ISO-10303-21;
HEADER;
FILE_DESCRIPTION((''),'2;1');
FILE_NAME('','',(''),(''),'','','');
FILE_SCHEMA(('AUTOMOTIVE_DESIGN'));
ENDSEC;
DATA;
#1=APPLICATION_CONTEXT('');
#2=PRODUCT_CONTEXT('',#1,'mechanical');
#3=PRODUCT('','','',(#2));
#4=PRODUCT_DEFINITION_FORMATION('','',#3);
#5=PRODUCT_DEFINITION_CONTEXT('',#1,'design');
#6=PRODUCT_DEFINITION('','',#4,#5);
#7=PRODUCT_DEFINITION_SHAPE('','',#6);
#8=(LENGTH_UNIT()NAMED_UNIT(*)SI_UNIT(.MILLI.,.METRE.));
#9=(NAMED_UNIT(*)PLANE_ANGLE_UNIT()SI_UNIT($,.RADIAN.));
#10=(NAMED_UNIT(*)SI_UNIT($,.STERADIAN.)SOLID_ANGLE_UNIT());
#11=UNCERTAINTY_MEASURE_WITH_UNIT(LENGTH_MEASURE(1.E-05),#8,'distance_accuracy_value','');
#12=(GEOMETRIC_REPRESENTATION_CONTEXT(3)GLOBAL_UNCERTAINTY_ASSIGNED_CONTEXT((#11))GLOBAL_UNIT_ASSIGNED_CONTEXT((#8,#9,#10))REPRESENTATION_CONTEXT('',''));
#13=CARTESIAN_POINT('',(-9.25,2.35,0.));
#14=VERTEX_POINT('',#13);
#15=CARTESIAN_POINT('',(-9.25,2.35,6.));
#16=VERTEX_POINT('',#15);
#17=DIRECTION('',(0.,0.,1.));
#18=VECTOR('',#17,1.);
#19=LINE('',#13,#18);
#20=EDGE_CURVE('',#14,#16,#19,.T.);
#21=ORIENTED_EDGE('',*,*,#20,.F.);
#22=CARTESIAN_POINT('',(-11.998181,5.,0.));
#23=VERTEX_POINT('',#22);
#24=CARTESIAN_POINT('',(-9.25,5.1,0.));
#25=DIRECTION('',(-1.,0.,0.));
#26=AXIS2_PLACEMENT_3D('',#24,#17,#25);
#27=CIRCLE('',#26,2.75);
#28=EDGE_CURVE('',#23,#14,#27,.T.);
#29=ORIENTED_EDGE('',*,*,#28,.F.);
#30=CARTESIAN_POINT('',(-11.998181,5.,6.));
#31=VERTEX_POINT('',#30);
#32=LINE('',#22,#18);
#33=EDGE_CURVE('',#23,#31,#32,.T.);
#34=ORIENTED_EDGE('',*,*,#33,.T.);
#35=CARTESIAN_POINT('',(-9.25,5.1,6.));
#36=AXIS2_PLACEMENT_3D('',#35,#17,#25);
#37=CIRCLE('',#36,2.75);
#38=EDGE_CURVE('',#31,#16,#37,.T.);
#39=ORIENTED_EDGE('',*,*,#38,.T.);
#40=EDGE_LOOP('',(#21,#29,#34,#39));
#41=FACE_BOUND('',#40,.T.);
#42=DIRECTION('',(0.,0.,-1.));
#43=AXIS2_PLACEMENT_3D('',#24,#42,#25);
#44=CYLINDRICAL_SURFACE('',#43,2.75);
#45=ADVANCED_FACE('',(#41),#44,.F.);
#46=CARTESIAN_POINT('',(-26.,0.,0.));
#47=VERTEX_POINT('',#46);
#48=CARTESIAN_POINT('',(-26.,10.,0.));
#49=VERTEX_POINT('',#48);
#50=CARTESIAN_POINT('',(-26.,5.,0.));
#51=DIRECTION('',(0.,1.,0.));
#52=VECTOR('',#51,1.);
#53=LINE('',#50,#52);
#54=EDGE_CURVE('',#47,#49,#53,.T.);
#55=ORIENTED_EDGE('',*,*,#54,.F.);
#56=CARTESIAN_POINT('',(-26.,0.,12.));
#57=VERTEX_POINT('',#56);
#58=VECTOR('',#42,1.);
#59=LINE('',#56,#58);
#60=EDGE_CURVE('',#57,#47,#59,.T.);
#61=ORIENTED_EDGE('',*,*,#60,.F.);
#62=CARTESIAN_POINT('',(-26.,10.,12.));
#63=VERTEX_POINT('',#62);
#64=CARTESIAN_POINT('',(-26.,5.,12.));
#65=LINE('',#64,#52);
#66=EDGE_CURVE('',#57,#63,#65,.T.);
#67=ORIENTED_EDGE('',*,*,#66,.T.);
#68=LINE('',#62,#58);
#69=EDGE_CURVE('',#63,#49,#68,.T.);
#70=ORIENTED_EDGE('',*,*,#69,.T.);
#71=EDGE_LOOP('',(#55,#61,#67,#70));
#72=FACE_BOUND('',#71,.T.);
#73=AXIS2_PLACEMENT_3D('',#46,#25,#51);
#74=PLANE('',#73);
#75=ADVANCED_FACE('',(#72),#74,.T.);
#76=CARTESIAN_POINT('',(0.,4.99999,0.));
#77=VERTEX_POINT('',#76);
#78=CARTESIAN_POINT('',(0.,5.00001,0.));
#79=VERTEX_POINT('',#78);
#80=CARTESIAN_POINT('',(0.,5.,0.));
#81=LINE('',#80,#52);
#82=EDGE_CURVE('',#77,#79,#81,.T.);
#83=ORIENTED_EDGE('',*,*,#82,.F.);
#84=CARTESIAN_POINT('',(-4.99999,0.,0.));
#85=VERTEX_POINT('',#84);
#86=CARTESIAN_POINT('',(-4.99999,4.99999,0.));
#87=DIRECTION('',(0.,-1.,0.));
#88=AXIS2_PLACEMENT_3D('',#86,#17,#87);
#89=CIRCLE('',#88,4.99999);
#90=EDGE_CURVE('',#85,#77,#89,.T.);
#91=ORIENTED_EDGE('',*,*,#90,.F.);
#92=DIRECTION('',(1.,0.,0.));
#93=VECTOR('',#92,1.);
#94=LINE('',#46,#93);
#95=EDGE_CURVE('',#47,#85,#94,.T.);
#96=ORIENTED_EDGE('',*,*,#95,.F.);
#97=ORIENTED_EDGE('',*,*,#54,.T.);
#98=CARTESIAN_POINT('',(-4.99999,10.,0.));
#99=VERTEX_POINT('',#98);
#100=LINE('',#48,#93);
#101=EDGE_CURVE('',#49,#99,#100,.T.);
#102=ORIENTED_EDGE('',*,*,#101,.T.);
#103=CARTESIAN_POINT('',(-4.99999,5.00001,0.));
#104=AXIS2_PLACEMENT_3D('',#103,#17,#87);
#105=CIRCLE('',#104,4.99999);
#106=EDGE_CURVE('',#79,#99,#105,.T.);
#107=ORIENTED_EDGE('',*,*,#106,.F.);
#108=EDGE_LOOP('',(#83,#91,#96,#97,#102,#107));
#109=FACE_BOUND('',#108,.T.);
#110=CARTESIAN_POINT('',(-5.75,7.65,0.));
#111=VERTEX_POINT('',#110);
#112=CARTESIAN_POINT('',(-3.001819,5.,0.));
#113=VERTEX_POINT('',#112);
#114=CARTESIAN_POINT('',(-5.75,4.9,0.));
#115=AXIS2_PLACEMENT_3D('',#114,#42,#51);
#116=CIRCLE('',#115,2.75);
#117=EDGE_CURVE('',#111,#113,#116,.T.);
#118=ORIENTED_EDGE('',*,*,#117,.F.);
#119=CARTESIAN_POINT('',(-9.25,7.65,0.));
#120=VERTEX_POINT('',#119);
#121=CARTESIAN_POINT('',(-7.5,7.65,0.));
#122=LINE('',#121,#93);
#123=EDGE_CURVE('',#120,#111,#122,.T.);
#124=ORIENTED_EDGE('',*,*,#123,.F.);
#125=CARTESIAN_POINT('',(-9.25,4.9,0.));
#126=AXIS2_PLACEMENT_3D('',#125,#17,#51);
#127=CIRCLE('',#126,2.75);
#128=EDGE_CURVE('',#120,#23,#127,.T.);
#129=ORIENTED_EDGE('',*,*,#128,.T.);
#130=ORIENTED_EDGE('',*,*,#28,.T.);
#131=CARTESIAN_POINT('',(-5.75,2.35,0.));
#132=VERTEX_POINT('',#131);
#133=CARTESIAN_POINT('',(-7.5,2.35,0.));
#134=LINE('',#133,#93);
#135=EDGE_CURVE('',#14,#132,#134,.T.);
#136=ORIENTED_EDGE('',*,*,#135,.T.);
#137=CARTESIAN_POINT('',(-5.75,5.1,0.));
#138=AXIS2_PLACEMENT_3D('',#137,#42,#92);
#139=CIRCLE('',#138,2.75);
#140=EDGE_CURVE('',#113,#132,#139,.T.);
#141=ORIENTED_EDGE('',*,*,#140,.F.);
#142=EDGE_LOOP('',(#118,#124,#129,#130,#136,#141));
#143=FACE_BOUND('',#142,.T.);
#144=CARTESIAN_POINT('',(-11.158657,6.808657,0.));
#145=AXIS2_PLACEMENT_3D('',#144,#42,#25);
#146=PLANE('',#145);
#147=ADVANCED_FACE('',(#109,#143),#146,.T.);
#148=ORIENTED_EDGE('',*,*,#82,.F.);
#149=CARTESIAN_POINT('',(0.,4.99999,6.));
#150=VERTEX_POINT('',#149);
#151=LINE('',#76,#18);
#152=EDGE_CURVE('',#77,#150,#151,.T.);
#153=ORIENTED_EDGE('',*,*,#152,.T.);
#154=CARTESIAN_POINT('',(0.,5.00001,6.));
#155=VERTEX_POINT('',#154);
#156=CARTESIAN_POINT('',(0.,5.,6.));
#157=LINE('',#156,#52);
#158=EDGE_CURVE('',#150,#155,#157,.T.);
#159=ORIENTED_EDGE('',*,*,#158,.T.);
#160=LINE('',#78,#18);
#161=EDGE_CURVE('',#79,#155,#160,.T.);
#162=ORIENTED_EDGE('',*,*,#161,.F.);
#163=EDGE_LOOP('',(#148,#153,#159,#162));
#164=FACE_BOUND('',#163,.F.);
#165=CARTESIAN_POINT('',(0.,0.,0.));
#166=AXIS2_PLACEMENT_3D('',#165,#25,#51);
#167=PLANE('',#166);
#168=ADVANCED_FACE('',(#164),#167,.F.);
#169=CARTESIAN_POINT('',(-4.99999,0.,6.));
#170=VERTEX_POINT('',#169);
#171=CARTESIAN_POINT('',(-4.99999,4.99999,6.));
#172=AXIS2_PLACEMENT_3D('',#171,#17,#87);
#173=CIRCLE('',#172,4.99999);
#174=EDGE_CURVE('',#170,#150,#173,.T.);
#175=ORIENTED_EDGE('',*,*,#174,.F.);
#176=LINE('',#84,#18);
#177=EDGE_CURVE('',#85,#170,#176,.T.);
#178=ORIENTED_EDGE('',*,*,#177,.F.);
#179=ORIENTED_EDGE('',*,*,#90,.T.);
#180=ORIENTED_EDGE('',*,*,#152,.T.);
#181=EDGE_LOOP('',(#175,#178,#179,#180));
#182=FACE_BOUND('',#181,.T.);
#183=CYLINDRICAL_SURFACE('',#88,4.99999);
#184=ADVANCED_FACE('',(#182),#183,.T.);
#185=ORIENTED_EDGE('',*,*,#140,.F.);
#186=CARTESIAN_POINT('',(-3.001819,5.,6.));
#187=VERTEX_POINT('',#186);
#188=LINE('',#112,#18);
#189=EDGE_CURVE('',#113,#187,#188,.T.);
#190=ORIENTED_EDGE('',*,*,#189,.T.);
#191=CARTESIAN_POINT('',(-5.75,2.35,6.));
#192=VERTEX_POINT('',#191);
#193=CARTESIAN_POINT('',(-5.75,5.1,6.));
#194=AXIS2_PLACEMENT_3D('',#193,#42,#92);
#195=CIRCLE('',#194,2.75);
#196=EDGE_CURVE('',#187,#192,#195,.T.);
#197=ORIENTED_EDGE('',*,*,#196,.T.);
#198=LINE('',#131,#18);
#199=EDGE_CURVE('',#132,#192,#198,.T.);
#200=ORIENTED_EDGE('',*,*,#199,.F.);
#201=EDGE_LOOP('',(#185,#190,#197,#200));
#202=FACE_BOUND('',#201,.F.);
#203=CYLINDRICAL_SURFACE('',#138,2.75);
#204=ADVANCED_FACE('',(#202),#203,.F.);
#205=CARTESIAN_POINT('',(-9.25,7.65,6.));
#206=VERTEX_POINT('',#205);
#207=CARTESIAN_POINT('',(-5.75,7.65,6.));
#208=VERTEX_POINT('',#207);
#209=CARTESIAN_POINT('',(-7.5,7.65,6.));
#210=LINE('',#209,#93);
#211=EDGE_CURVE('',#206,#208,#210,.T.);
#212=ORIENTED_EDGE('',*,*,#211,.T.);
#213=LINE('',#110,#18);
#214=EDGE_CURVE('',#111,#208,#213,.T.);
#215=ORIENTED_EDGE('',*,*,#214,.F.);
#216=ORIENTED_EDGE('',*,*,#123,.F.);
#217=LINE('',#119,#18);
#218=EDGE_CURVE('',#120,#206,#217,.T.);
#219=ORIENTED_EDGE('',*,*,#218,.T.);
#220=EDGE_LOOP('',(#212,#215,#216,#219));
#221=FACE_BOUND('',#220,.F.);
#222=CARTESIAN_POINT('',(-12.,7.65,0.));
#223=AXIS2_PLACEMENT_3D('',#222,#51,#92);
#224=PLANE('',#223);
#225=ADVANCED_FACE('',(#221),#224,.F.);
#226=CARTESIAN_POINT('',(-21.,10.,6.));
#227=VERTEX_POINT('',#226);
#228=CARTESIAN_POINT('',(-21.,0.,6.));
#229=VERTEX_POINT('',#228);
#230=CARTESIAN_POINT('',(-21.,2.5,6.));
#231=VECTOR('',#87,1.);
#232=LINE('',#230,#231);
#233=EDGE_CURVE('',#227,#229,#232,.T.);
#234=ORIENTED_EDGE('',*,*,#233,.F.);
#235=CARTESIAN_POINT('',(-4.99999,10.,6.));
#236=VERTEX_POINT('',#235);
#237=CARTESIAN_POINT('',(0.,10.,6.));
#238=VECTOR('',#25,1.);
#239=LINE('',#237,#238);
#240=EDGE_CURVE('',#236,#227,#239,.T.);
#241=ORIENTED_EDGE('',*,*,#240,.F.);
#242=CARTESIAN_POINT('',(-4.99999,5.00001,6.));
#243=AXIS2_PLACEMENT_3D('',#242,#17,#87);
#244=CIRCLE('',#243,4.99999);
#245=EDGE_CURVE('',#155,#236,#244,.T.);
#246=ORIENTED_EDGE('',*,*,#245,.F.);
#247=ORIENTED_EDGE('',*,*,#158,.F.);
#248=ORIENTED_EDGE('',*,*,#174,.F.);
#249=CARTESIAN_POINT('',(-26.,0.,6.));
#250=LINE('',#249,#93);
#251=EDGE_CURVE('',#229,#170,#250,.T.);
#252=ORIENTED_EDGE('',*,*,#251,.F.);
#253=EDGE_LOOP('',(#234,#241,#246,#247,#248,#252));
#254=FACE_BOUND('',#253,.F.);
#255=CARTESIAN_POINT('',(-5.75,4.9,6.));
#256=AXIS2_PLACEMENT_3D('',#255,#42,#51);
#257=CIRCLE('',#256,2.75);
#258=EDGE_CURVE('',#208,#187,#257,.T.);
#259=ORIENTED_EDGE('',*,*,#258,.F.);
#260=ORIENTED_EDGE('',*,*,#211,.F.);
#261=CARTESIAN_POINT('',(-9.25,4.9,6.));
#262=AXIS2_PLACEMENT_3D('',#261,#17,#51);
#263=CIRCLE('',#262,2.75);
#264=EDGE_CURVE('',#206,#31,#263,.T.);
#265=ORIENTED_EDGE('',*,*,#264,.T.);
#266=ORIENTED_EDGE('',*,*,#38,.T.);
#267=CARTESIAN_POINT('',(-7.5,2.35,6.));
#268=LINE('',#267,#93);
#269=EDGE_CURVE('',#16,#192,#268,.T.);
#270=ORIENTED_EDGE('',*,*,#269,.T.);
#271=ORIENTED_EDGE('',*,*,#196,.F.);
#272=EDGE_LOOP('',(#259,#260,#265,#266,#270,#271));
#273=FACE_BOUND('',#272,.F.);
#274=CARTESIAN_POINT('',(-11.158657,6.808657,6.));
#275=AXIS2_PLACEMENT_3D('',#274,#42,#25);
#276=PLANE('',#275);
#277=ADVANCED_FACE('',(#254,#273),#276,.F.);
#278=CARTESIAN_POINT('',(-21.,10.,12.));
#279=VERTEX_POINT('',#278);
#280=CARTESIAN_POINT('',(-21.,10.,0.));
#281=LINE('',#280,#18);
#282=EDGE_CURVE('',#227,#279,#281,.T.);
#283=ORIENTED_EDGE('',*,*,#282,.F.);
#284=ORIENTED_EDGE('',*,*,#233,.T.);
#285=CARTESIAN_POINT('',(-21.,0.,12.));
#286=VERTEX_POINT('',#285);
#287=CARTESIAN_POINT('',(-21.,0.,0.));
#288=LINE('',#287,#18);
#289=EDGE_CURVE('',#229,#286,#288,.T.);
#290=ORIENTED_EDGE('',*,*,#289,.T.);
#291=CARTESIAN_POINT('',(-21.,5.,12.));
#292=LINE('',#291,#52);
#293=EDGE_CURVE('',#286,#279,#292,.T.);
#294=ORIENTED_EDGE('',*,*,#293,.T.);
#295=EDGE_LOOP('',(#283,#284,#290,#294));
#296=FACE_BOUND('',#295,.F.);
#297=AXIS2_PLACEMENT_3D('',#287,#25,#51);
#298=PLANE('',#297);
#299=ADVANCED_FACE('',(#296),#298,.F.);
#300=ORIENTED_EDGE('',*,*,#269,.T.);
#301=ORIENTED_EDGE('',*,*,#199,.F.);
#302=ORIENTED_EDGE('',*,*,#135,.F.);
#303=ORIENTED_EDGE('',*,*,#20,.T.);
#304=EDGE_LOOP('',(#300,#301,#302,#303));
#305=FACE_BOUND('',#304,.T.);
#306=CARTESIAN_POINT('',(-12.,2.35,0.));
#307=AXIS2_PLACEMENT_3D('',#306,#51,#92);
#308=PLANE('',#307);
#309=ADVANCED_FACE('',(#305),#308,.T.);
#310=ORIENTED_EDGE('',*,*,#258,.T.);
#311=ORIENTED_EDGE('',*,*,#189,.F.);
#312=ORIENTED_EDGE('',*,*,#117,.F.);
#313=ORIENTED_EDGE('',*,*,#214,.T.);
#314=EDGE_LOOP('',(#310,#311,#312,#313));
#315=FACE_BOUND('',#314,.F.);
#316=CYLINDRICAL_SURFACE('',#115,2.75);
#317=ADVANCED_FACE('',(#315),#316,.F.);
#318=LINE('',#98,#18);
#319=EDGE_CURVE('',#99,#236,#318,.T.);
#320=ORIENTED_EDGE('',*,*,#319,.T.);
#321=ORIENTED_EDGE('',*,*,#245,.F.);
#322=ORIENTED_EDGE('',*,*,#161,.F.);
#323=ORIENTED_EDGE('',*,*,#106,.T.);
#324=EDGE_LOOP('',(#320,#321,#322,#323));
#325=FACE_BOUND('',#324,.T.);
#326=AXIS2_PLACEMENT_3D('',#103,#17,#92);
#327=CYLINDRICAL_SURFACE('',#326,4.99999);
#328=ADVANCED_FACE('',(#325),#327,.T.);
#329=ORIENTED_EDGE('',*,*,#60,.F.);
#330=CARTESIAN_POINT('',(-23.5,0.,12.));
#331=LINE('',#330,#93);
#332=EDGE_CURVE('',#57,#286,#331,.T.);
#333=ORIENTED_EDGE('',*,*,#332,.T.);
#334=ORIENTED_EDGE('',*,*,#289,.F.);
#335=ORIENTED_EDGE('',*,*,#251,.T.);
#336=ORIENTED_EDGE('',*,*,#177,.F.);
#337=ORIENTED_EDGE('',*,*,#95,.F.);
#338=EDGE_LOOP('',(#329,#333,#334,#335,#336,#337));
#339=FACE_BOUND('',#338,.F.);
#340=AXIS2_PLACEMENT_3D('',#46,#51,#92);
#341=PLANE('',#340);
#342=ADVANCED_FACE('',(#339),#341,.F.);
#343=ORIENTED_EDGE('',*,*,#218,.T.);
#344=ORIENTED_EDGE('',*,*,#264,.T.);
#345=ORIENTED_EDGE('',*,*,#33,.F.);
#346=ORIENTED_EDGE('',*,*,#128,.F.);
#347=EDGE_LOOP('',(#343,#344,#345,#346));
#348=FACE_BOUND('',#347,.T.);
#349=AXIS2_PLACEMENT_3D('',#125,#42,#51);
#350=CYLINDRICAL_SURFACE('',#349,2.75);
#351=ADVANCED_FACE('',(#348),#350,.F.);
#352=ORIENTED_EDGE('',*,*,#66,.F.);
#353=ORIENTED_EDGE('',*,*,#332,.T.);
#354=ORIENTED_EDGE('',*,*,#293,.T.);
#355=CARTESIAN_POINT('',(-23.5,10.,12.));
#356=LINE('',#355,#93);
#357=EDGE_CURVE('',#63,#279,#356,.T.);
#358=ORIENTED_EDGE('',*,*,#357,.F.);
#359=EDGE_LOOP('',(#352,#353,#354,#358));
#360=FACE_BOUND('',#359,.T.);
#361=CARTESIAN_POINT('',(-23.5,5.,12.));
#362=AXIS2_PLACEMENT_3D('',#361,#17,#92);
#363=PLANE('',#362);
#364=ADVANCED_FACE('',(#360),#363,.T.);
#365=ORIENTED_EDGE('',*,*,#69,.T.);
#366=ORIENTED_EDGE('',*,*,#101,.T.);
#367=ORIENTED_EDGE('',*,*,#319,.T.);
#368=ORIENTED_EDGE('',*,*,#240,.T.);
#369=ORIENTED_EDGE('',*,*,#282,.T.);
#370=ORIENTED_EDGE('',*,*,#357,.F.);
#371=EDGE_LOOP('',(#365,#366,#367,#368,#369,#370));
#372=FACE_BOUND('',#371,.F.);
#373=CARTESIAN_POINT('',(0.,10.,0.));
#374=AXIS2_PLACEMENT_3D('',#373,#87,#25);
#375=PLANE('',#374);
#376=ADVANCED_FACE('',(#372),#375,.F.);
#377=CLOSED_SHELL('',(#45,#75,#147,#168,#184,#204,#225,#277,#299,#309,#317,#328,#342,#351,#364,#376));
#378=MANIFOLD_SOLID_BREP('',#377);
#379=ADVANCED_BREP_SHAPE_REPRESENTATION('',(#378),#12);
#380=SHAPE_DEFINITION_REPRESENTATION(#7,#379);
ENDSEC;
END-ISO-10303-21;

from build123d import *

# Parameters (mm, degrees)
F0_W        = 21
F0_H        = 10
F0_W_2      = 9
F0_H_2      = 5.3
F0_W_3      = 5
F1_DEPTH    = 6
F2_DEPTH    = 12
F3_T1_DEPTH = 6
F4_R        = 4.99999


# Not quite as in the source:
# - a fillet or chamfer that OpenCascade refuses, or shapes differently, is made with other operations: its cross-section is extruded or revolved along the edge and cut away or added
# - a fillet or chamfer is up to 0.001 mm smaller than in the source, because OpenCascade refuses the exact size


with BuildPart() as f1:
    # F0 (on Top) → F1 (new body)
    with BuildSketch(Plane.XY):
        with Locations((-10.5, 5)):
            Rectangle(F0_W, F0_H)
        with Locations((-7.5, 5)):
            Rectangle(F0_W_2, F0_H_2, mode=Mode.SUBTRACT)
        with Locations((-23.5, 5)):
            Rectangle(F0_W_3, F0_H)
    extrude(amount=F1_DEPTH)

    # F0 (on Top) → F2 (join)
    with BuildSketch(Plane.XY):
        with Locations((-23.5, 5)):
            Rectangle(F0_W_3, F0_H)
    extrude(amount=F2_DEPTH)

    # F3: fillet of radius 2.75 on 4 edges, made by hand

    # F3_s2 → F3_t1 (join)
    with BuildSketch(Plane.XY):
        with BuildLine():
            ThreePointArc((-9.25, 7.65), (-11.1945436483, 6.8445436483), (-12, 4.9))
            Line((-12, 4.9), (-12, 7.65))
            Line((-12, 7.65), (-9.25, 7.65))
        make_face()
        with BuildLine():
            ThreePointArc((-12, 5.1), (-11.1945436483, 3.1554563517), (-9.25, 2.35))
            Line((-9.25, 2.35), (-12, 2.35))
            Line((-12, 2.35), (-12, 5.1))
        make_face()
        with BuildLine():
            ThreePointArc((-5.75, 7.65), (-3.8054563517, 6.8445436483), (-3, 4.9))
            Line((-3, 4.9), (-3, 7.65))
            Line((-3, 7.65), (-5.75, 7.65))
        make_face()
        with BuildLine():
            ThreePointArc((-3, 5.1), (-3.8054563517, 3.1554563517), (-5.75, 2.35))
            Line((-5.75, 2.35), (-3, 2.35))
            Line((-3, 2.35), (-3, 5.1))
        make_face()
    extrude(amount=F3_T1_DEPTH)

    # F4 (radius 5 in the source; OpenCascade refuses exactly that, so slightly less here)
    f4_edges = [f1.edges().sort_by_distance(p)[0] for p in [
        (0, 0, 3),
        (0, 10, 3),
    ]]
    fillet(f4_edges, radius=F4_R)


solid = f1.part
